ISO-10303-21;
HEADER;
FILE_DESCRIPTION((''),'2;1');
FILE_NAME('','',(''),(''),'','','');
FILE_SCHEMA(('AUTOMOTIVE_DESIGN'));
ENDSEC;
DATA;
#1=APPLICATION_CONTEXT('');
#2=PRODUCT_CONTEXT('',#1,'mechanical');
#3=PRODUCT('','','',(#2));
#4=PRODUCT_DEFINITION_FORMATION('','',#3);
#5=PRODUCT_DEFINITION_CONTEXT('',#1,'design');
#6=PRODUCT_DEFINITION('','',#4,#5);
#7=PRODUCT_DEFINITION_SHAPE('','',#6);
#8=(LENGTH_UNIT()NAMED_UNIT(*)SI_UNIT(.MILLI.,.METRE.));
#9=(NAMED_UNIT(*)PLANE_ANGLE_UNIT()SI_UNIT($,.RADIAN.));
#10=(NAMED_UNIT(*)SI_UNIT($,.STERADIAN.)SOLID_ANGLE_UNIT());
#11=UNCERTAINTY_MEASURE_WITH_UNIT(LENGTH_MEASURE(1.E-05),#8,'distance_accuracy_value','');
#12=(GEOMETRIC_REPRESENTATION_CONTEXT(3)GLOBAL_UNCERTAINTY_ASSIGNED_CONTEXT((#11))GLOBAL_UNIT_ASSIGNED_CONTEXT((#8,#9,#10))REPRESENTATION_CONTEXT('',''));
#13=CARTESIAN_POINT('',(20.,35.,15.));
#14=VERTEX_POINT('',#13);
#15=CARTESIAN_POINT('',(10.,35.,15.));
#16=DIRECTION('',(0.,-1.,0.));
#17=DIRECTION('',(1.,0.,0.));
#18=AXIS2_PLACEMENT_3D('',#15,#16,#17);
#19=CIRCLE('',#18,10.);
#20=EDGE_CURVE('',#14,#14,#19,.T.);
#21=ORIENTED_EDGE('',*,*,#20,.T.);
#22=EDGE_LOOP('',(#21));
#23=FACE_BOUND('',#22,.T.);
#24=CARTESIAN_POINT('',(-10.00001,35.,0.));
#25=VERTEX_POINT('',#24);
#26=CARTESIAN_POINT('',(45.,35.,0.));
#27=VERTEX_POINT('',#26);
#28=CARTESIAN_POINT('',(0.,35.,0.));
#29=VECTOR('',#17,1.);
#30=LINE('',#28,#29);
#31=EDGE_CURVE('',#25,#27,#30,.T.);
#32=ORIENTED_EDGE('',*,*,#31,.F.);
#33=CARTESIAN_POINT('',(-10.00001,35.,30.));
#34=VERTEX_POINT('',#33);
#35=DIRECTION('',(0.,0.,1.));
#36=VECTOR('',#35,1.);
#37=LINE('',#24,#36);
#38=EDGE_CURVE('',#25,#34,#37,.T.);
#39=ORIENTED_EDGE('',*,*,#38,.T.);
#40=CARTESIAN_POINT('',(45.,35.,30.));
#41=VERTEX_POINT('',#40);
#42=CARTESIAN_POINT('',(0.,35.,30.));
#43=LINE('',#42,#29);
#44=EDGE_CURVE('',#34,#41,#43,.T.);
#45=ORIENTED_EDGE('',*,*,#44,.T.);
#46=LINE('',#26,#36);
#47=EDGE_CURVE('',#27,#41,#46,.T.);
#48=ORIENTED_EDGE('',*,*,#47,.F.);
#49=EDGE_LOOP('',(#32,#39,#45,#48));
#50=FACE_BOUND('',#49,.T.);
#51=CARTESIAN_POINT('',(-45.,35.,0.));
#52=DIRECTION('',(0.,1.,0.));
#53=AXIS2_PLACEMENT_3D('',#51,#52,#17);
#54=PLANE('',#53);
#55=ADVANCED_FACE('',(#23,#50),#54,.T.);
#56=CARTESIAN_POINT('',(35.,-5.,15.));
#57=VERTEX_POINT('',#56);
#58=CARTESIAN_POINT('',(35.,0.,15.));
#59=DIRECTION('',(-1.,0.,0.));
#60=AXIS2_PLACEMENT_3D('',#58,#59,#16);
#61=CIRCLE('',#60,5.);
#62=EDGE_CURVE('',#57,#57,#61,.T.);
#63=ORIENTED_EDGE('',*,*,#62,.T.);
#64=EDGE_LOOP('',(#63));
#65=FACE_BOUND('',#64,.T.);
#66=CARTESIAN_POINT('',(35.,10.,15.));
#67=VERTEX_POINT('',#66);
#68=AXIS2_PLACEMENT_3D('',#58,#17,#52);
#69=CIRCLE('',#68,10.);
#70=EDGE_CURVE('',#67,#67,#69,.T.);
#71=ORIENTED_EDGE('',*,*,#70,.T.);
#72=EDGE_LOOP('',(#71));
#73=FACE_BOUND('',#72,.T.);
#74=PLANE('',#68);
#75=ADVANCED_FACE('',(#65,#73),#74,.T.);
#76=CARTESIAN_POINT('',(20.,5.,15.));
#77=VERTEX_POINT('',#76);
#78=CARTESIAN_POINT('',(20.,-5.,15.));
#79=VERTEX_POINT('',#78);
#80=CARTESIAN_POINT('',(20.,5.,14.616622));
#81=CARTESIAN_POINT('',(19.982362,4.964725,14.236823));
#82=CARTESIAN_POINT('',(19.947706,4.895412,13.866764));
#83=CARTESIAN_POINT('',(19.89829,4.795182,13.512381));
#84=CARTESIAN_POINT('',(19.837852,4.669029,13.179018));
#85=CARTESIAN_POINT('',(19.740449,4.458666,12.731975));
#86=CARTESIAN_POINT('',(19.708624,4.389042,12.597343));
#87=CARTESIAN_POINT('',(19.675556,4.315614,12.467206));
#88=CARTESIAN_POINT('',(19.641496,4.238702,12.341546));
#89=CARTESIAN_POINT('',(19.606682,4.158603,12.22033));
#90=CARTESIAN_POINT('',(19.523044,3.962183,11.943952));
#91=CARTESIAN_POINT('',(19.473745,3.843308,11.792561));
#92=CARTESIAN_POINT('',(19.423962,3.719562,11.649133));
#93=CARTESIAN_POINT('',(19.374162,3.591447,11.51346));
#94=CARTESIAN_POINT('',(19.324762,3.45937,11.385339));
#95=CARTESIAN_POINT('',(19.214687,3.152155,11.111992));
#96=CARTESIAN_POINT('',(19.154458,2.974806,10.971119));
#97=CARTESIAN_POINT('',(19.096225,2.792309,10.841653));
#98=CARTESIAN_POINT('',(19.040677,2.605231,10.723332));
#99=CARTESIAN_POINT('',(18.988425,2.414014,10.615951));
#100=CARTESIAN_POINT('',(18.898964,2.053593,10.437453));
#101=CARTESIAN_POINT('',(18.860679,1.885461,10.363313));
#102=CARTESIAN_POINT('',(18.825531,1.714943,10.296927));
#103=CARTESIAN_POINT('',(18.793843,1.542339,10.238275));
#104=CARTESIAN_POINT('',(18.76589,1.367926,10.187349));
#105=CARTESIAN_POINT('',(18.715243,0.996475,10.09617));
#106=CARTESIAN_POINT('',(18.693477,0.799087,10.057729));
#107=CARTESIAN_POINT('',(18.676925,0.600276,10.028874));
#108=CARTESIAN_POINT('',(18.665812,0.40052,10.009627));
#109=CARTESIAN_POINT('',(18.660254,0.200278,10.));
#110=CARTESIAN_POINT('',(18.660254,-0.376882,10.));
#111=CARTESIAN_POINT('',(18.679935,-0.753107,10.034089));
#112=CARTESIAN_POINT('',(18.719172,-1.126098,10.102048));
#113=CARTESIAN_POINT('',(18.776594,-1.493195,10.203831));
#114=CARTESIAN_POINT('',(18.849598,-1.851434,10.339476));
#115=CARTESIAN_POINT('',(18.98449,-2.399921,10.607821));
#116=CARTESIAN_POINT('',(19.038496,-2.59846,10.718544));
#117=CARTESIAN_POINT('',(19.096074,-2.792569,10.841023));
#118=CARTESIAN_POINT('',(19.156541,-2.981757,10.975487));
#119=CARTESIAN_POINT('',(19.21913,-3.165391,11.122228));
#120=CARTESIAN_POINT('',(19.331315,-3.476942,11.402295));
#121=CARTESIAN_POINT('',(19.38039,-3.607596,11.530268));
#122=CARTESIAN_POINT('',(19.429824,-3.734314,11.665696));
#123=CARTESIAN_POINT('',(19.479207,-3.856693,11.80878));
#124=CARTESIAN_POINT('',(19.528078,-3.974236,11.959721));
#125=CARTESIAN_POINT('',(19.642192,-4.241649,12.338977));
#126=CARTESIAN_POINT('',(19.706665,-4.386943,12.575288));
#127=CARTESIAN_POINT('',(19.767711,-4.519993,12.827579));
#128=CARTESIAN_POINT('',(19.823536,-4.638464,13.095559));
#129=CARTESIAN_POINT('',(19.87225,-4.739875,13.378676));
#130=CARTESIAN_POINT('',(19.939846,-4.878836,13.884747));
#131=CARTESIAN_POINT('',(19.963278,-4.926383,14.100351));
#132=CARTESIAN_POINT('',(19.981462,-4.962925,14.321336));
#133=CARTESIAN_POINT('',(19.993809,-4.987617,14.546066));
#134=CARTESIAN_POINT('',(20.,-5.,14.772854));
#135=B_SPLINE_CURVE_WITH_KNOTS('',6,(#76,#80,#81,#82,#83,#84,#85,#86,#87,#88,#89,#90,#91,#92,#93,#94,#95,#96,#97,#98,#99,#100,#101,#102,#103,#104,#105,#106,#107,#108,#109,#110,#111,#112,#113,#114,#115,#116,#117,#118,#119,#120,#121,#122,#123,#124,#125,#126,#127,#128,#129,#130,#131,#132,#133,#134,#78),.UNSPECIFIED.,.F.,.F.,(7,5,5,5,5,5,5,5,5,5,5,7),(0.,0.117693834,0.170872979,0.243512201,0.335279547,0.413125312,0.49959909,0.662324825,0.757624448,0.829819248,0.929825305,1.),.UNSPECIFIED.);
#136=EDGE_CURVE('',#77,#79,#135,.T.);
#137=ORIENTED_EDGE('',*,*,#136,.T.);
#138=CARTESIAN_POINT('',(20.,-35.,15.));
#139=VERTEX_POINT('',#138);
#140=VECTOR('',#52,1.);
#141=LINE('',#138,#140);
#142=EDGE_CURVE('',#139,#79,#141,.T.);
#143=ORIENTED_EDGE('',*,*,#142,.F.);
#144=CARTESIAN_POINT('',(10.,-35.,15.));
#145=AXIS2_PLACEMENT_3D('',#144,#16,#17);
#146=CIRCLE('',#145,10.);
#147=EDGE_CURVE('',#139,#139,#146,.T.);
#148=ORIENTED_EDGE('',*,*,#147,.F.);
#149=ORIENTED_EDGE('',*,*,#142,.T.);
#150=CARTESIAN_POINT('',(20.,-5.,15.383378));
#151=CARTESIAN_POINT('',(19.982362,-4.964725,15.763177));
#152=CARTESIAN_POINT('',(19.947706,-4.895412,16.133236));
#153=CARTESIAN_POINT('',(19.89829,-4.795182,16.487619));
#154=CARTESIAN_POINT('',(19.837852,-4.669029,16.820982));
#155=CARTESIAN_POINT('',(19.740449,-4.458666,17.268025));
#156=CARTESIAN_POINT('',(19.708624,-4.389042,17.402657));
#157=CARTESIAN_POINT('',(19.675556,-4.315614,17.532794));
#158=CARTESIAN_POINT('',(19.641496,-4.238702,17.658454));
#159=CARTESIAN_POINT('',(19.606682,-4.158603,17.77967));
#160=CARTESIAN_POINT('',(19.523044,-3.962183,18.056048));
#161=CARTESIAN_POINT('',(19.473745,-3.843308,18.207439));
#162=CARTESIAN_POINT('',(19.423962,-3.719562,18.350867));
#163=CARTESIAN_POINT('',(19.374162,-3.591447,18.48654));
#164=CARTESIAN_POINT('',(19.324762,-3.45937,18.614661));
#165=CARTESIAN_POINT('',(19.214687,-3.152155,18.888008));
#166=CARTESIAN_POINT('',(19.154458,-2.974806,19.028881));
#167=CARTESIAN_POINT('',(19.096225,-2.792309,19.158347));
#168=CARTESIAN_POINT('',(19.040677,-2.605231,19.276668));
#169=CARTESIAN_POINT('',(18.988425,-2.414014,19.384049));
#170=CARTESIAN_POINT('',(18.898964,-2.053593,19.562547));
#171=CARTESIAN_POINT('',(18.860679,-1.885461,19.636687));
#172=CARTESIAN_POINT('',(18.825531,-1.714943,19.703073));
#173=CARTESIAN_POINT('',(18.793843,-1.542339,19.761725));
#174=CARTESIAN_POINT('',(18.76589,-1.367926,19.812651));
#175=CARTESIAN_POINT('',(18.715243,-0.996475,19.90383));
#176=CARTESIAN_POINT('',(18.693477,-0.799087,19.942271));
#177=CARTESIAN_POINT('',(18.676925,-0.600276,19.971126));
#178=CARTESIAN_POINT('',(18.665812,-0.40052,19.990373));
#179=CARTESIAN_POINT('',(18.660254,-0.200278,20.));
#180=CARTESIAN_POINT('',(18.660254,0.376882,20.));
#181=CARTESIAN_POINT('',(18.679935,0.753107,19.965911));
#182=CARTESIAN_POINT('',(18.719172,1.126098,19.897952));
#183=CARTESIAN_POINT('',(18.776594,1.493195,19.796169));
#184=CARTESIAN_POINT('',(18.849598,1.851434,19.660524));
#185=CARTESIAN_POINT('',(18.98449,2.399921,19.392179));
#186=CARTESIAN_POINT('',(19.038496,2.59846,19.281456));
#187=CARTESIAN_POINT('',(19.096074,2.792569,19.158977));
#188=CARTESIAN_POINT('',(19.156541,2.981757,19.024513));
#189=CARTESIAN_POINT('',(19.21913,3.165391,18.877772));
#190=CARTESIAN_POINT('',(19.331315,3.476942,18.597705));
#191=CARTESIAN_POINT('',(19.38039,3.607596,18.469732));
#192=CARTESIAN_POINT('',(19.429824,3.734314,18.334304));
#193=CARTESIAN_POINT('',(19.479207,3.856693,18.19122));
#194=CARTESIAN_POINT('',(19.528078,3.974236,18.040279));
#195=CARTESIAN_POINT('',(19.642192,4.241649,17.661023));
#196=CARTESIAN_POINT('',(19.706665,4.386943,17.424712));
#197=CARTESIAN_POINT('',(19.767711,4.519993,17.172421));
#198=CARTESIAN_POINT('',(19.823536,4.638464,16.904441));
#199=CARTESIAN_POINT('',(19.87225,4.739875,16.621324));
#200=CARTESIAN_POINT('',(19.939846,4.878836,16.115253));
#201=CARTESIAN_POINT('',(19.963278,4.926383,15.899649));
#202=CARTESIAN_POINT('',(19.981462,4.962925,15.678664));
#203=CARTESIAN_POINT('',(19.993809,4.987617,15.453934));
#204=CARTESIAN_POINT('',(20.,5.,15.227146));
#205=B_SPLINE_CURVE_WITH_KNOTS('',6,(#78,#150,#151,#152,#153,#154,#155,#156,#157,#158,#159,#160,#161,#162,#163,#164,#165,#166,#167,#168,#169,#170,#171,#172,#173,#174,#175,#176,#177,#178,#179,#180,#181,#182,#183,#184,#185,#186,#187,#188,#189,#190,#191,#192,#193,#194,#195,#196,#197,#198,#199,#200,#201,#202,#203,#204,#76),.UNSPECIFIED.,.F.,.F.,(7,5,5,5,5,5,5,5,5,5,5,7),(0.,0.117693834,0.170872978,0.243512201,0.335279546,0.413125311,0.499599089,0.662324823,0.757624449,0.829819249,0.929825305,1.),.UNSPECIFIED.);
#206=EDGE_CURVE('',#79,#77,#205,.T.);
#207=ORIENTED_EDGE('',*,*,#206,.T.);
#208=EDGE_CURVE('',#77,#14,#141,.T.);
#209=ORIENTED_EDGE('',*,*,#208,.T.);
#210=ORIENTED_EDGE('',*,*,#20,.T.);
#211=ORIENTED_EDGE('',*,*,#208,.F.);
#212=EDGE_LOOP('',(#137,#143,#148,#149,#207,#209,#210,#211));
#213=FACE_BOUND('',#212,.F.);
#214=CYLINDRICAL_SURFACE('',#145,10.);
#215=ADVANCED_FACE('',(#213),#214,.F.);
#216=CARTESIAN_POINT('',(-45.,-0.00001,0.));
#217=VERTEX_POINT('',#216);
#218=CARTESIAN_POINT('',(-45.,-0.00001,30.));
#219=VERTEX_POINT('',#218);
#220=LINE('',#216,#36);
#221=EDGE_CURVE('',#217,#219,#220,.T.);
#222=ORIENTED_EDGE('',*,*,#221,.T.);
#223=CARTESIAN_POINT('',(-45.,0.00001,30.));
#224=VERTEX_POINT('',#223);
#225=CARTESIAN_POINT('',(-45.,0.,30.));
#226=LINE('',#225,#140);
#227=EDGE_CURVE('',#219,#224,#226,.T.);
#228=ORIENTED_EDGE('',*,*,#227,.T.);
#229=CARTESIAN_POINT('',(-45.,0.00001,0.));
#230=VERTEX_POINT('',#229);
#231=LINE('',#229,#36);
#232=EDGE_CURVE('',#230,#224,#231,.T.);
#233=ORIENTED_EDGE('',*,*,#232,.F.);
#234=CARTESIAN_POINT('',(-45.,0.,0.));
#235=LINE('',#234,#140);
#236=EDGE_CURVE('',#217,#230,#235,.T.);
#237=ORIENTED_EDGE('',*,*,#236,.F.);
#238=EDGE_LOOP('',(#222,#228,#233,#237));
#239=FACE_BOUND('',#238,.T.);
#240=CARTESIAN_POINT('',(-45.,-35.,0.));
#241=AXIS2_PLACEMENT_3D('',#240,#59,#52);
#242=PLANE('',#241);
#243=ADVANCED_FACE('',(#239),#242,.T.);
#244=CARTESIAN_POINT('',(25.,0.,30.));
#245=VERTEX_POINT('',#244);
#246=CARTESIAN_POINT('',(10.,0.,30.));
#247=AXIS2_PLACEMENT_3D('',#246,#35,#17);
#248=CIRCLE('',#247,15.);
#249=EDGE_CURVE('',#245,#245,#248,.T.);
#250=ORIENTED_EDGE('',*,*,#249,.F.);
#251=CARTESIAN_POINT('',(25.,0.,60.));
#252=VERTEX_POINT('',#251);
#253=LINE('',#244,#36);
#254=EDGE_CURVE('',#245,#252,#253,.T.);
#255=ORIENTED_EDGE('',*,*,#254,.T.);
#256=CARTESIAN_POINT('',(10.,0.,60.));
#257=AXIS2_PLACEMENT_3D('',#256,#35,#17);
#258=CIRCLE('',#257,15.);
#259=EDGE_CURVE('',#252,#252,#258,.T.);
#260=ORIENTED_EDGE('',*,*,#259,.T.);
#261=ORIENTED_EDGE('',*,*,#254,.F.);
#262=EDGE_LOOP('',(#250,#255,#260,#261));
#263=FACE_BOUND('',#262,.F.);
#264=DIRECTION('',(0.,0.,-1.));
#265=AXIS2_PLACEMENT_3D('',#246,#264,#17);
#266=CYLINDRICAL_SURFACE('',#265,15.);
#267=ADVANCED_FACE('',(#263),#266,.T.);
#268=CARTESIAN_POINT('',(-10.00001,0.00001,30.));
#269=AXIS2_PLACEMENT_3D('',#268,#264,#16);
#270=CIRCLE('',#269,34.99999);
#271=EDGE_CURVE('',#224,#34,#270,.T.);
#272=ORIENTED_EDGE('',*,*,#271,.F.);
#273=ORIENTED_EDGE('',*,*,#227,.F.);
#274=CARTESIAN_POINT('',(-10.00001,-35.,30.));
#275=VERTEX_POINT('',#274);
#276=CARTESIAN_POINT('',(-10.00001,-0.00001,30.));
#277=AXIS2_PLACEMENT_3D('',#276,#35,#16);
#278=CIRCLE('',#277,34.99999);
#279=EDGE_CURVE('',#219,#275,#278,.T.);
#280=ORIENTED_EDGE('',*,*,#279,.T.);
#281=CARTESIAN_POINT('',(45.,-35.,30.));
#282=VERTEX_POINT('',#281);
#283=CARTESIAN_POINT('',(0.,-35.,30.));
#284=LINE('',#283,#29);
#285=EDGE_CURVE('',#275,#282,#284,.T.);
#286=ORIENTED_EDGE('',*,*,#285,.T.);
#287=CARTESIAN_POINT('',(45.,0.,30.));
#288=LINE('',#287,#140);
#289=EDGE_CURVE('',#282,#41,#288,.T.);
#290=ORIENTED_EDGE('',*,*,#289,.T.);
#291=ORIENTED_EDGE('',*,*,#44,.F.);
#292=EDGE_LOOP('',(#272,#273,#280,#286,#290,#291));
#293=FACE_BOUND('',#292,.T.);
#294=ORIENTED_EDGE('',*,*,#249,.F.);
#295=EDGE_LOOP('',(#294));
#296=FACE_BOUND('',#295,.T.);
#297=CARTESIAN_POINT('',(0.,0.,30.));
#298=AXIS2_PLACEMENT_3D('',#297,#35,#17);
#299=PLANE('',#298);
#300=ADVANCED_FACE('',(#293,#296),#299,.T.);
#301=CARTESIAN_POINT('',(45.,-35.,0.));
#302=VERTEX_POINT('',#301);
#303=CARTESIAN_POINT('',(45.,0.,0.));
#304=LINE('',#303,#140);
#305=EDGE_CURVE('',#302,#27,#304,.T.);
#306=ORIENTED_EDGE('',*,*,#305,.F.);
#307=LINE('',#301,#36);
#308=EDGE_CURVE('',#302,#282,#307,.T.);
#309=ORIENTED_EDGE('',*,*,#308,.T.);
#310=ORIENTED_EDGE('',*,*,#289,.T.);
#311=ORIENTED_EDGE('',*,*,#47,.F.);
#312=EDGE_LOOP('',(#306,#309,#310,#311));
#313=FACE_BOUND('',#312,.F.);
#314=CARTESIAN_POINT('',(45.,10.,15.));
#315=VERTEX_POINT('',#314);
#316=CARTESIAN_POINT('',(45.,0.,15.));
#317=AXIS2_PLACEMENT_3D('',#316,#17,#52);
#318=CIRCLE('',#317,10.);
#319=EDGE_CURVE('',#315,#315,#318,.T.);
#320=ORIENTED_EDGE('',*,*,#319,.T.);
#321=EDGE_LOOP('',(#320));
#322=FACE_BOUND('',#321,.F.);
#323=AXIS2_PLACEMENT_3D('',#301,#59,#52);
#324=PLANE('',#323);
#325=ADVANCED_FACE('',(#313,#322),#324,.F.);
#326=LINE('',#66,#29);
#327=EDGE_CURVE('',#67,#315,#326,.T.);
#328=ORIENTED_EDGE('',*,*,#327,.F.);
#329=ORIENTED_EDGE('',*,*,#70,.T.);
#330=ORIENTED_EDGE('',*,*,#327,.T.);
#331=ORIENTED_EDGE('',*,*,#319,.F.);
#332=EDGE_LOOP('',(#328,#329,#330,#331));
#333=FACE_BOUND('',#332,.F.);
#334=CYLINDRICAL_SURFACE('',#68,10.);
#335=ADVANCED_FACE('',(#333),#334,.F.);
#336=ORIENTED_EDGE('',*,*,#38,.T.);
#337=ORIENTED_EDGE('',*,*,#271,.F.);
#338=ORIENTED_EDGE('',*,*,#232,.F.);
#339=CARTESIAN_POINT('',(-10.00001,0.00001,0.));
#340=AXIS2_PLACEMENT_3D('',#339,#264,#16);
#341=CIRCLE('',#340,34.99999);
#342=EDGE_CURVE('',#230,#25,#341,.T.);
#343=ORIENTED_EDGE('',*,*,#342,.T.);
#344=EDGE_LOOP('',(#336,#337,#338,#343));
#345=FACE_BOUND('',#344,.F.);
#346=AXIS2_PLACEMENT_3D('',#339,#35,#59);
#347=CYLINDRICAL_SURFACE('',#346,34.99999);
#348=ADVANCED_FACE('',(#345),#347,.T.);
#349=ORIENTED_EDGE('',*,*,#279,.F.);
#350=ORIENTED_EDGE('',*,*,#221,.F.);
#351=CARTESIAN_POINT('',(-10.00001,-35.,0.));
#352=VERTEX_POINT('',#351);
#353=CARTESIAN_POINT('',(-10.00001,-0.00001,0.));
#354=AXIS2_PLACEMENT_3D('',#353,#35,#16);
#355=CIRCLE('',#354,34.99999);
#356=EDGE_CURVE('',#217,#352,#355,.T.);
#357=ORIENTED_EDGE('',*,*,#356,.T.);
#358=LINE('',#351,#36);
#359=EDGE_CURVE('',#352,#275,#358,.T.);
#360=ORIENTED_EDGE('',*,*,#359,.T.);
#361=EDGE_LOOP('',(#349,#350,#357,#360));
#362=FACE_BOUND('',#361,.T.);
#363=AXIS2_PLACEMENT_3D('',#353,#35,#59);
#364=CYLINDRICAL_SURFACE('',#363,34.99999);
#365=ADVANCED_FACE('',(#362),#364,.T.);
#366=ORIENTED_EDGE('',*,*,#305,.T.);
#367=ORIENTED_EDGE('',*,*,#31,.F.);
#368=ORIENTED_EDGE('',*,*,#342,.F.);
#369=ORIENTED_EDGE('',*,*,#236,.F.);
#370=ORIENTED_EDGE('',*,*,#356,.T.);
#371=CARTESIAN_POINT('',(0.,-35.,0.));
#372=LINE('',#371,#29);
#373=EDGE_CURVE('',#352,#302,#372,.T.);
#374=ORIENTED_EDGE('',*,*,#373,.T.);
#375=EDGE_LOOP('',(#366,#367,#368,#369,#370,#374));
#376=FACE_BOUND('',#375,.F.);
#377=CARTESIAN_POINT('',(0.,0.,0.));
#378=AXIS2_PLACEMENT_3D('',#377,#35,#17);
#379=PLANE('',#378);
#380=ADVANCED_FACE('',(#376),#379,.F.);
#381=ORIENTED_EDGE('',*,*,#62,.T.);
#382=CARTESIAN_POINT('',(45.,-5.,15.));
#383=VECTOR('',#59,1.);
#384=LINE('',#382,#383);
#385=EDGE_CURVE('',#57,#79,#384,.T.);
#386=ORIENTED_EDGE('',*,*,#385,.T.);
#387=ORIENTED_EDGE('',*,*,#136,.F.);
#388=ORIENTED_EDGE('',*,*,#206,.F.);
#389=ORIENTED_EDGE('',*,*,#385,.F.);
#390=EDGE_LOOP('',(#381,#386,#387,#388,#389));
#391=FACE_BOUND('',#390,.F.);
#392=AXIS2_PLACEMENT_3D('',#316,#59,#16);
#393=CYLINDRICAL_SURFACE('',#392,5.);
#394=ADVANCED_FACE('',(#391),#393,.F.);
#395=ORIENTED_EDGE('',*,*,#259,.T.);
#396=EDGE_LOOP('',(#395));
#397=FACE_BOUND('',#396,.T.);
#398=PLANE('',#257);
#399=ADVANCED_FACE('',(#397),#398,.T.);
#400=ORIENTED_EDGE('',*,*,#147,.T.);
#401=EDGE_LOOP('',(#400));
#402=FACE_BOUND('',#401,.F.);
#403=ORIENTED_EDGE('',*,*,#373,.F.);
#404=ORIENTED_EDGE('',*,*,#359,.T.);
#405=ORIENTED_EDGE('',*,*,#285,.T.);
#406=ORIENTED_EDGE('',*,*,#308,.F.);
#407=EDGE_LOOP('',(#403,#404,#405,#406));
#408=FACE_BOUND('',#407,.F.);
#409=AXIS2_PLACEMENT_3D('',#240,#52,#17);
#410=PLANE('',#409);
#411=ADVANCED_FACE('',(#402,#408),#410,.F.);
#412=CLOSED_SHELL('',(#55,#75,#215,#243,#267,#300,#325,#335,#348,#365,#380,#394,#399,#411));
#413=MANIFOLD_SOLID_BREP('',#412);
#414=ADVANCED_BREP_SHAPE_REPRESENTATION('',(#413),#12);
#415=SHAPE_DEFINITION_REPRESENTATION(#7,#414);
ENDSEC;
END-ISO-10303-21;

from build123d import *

# Parameters (mm, degrees)
F0_W           = 90
F0_H           = 70
F1_DEPTH       = 30
F2_R           = 34.99999
F3_R           = 10
F4_DEPTH       = 70.001
F6_D           = 10
F6_DEPTH       = 35
F6_CBORE_D     = 20
F6_CBORE_DEPTH = 10
F6_TIP         = 3.0043030951
F7_R           = 15
F8_DEPTH       = 30


# Not quite as in the source:
# - a fillet or chamfer is up to 0.001 mm smaller than in the source, because OpenCascade refuses the exact size


with BuildPart() as f1:
    # F0 (on Top) → F1 (new body)
    with BuildSketch(Plane.XY):
        Rectangle(F0_W, F0_H)
    extrude(amount=F1_DEPTH)

    # F2 (radius 35 in the source; OpenCascade refuses exactly that, so slightly less here)
    f2_edges = [f1.edges().sort_by_distance(p)[0] for p in [
        (-45, 35, 15),
        (-45, -35, 15),
    ]]
    fillet(f2_edges, radius=F2_R)

    # F3 (on face) → F4 (cut, through all)
    with BuildSketch(Plane.XZ.offset(35)):
        with Locations((10, 15)):
            Circle(F3_R)
    extrude(amount=-F4_DEPTH, mode=Mode.SUBTRACT)

    # F6
    with Locations(Plane.YZ.offset(45)):
        with Locations((0, 15)):
            CounterBoreHole(F6_D / 2, F6_CBORE_D / 2, F6_CBORE_DEPTH, depth=F6_DEPTH)
            with Locations((0, 0, -(F6_DEPTH + F6_TIP / 2))):  # 118° drill point
                Cone(0, F6_D / 2, F6_TIP, mode=Mode.SUBTRACT)

    # F7 (on face) → F8 (join)
    with BuildSketch(Plane.XY.offset(30)):
        with Locations((10, 0)):
            Circle(F7_R)
    extrude(amount=F8_DEPTH)


solid = f1.part
